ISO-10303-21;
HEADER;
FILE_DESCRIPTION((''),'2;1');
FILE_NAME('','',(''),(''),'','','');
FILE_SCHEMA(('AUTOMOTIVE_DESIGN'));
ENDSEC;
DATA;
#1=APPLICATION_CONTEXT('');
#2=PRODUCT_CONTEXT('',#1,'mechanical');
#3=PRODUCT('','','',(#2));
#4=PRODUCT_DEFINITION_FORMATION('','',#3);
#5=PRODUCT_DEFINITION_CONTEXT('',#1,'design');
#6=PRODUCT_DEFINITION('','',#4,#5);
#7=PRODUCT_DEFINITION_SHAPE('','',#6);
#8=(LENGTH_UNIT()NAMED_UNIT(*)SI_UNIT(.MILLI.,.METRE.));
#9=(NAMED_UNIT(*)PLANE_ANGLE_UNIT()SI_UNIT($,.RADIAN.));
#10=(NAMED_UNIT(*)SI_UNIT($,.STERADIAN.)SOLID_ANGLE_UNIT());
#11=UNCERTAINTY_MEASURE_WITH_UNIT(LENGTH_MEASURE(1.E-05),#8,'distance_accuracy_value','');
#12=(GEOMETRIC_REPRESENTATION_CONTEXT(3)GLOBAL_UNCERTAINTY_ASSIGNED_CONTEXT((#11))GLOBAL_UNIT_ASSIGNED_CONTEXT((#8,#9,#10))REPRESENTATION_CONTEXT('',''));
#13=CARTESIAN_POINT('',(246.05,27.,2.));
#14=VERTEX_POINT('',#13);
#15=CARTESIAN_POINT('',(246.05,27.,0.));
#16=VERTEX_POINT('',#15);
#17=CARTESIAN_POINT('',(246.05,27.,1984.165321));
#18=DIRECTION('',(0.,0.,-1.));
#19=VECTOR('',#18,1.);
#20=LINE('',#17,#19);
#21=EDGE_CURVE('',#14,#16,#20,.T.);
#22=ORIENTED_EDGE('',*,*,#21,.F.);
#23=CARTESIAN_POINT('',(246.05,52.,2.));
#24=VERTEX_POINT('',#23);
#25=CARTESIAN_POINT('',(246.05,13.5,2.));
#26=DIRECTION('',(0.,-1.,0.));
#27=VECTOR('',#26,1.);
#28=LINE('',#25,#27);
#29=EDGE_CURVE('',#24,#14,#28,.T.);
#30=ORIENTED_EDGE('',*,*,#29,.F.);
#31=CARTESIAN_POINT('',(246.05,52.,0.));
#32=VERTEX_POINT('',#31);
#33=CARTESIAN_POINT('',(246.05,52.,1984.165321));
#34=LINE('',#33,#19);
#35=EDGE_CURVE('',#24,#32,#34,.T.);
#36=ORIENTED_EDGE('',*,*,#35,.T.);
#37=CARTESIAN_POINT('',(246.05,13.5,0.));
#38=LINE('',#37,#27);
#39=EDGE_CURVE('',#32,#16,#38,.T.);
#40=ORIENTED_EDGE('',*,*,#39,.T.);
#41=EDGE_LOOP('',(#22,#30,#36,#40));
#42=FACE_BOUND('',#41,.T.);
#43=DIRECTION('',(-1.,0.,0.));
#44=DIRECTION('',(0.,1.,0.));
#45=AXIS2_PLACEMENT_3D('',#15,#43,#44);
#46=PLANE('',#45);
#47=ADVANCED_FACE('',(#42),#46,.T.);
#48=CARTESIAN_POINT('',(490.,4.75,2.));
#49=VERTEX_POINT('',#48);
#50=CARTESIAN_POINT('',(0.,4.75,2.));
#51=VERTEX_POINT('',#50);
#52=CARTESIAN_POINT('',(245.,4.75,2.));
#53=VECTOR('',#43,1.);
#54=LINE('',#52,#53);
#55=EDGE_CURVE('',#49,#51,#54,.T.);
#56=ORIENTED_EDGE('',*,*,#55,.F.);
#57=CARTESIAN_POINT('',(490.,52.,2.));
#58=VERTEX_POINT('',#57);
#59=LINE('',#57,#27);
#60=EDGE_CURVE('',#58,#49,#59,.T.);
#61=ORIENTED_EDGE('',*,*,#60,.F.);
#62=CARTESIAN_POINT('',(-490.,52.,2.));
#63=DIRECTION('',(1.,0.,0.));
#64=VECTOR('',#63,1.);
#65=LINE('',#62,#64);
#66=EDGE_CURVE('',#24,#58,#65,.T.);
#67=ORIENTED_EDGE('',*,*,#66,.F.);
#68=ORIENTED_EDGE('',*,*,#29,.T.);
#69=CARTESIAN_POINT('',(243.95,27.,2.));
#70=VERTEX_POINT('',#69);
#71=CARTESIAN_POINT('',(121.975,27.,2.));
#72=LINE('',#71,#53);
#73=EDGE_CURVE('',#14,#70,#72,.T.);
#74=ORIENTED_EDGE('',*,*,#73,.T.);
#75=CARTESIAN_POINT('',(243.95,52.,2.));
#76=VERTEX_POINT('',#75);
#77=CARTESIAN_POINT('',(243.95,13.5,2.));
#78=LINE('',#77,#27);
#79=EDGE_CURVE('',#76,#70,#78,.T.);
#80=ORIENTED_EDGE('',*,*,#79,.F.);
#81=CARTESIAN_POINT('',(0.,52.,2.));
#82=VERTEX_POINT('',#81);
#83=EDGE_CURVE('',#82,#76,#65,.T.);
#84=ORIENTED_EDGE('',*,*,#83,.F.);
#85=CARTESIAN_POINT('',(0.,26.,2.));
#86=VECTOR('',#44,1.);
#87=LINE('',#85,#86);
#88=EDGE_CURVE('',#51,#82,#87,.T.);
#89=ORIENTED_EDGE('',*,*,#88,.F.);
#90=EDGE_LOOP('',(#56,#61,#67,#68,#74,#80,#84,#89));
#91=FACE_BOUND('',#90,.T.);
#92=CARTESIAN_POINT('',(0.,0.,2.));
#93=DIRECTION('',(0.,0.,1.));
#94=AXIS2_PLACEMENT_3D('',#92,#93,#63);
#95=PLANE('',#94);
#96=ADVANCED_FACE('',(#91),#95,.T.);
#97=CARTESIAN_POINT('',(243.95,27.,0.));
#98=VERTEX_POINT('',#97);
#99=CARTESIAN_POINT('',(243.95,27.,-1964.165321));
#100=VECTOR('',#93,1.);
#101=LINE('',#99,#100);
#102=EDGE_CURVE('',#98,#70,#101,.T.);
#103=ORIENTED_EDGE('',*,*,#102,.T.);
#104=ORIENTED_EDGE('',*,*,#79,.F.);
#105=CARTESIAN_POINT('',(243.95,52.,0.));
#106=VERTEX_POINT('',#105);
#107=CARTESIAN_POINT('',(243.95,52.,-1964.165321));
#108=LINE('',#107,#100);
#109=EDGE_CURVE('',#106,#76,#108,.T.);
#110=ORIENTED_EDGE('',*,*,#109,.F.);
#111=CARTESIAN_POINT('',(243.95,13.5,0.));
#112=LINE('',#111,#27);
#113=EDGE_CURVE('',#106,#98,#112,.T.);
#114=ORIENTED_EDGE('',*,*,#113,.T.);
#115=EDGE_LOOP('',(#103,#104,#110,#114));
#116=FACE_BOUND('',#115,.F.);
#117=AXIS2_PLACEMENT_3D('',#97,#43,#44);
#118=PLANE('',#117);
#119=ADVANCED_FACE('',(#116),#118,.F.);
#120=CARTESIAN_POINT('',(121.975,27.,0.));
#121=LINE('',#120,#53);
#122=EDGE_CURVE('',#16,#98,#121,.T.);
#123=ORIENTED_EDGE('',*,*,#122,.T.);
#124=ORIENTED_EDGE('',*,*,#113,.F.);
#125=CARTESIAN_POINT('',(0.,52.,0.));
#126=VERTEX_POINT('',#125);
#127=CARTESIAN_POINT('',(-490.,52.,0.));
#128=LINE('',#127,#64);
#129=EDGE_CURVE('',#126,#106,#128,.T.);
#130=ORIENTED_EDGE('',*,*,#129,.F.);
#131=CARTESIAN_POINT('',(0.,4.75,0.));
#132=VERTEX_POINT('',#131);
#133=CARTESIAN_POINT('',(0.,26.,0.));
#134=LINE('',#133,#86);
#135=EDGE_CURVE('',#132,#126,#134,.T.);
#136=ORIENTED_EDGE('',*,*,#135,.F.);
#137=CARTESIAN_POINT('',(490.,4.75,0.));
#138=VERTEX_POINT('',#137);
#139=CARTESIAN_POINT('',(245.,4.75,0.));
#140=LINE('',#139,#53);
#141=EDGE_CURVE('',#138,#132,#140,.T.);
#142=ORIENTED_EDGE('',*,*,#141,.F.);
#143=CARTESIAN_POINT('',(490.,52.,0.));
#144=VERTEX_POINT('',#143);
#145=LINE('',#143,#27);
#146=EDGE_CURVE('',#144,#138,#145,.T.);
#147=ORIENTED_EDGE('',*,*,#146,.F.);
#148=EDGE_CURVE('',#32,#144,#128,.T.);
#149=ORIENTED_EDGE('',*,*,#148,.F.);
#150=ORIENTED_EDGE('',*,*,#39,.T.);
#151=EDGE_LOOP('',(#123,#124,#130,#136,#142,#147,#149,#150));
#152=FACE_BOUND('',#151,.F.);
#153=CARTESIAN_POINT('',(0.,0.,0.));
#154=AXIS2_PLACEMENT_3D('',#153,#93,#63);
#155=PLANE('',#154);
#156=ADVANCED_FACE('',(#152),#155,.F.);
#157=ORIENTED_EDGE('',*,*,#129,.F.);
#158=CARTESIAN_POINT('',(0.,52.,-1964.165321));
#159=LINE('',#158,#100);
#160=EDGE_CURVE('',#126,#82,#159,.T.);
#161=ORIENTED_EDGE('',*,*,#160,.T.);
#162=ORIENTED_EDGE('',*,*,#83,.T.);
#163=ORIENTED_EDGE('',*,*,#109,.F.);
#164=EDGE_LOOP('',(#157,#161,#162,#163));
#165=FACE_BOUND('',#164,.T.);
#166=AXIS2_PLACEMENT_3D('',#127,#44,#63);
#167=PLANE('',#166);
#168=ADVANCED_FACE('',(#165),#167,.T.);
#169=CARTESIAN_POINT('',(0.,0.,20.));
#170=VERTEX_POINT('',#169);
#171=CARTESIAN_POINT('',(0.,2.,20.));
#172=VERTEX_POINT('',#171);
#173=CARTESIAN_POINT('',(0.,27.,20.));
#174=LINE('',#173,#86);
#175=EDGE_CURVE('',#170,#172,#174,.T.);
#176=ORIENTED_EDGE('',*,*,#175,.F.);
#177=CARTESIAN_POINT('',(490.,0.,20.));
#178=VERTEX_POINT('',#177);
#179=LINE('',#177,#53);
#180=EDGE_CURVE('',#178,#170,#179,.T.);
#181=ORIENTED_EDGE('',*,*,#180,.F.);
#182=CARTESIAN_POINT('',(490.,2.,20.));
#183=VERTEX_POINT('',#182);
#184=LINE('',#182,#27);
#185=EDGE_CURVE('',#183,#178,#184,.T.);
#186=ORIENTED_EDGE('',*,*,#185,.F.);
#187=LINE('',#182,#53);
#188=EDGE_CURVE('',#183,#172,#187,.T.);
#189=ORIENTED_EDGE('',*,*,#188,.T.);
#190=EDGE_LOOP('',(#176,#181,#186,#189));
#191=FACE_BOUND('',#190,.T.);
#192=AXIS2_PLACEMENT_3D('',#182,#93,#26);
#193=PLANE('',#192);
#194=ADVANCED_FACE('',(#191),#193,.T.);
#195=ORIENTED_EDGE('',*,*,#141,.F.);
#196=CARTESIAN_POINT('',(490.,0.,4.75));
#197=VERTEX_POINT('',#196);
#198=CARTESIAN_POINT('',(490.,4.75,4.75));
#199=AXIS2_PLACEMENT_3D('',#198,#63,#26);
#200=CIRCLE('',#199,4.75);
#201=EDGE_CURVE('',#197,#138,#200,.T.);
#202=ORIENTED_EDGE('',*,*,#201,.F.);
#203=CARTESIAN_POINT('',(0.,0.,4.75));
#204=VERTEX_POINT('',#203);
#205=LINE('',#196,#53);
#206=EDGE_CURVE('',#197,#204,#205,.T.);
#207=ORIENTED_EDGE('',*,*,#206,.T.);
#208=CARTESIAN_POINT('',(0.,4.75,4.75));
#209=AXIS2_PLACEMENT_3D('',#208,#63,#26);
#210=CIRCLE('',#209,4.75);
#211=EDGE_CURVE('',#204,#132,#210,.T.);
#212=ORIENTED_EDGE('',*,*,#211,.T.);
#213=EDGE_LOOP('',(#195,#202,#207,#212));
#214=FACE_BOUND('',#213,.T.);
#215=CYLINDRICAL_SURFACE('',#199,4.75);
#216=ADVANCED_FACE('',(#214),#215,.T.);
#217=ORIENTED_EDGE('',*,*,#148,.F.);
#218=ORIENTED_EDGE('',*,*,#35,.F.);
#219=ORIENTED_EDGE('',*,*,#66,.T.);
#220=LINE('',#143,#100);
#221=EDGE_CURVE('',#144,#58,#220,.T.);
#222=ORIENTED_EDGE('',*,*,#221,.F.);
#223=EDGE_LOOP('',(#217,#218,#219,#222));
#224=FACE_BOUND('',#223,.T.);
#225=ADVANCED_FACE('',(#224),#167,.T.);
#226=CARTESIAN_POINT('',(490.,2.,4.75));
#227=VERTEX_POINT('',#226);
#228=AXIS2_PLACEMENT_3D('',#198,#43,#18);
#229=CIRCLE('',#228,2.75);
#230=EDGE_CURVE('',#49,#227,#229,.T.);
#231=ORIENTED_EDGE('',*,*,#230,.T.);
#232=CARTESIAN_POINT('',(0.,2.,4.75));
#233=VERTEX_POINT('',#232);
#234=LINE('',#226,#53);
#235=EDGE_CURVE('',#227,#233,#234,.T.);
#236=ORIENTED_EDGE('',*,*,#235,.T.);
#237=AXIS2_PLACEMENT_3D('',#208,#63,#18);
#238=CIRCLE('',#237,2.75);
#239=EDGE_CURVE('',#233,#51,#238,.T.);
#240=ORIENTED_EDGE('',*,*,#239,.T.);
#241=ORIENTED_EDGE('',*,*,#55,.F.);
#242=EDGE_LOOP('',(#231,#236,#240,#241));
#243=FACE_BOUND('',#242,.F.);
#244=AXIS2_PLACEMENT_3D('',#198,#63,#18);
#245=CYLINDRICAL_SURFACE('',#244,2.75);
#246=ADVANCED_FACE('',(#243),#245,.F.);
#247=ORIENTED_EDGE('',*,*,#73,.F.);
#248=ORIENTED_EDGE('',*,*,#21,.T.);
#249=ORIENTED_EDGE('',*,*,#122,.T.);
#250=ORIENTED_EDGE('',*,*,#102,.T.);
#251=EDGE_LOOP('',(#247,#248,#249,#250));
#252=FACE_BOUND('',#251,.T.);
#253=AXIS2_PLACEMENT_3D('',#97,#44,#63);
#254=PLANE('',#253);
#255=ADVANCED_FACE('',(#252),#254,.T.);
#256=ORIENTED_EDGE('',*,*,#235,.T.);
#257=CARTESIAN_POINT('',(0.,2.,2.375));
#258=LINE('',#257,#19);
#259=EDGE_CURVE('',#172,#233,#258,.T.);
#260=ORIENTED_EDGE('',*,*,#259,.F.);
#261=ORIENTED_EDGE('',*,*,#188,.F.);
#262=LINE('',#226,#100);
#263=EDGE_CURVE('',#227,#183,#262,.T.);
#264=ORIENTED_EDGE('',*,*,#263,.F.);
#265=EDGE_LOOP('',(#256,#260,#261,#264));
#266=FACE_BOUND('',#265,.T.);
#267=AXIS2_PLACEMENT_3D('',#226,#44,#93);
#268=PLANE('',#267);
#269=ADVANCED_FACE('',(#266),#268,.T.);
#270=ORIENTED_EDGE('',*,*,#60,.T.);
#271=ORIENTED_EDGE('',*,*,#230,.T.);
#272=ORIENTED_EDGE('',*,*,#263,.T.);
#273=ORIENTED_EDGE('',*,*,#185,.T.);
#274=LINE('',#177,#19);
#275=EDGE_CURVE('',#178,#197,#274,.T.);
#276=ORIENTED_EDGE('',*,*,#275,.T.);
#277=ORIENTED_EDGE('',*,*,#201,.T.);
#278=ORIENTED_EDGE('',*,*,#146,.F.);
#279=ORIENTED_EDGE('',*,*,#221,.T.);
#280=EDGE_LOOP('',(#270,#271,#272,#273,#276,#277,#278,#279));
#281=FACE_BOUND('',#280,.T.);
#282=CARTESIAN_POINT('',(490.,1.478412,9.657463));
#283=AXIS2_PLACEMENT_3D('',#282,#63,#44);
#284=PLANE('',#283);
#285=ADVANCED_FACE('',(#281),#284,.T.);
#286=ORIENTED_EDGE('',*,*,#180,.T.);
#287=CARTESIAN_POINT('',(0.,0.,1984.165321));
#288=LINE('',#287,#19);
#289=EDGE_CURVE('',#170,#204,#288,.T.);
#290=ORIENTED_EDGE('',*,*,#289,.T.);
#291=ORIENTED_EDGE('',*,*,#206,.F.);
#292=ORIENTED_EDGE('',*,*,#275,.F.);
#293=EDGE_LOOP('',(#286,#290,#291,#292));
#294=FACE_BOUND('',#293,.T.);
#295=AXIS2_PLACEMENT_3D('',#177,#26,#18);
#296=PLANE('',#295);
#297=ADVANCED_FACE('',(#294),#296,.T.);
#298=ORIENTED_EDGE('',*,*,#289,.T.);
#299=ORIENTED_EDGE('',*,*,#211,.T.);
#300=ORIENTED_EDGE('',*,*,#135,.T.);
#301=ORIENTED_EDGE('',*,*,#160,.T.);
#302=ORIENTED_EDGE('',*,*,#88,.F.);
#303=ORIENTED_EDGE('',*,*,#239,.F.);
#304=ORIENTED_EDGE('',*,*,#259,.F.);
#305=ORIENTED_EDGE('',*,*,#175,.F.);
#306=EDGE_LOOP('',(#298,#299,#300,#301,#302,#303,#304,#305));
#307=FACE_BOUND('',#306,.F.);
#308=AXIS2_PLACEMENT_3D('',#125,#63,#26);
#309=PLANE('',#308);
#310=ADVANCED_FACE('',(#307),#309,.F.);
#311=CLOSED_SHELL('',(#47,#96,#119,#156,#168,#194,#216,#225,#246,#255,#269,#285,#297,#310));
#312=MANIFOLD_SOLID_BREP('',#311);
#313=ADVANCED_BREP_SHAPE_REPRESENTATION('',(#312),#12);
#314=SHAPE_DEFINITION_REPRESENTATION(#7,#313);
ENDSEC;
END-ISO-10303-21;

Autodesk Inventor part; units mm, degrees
ref_plane "YZ Plane" through (0, 0, 0) normal (1, 0, 0) x (0, 1, 0)
ref_plane "XZ Plane" through (0, 0, 0) normal (0, 1, 0) x (-1, 0, 0)
ref_plane "XY Plane" through (0, 0, 0) normal (0, 0, 1) x (1, 0, 0)
sketch "Sketch1" plane through (0, 0, 0) normal (0, 0, 1) x (1, 0, 0)
  line L0 (-490, 52) -> (490, 52)
  line L1 (490, 52) -> (490, 0)
  line L2 (490, 0) -> (-490, 0)
  line L3 (-490, 0) -> (-490, 52)
  point P0 (0, 0)
  point P1 (0, 0)
  dimension "d0" = 980
  dimension "d1" = 52
extrude "Plate1" add sketch "Sketch1" along normal blind 2
sketch "Sketch2" plane through (490, 2, 0) normal (0, -1, 0) x (1, 0, 0)
  line L0 (-980, 0) -> (0, 0)
  line L1 (0, 0) -> (0, 20)
  line L2 (0, 20) -> (-980, 20)
  line L3 (-980, 20) -> (-980, 0)
edge flange "Flange1" height 20 angle 90 thickness 2 bend radius 2.75 thickness toward (0, -1, 0) relief round relief width 2 relief depth 1 edges at (0, 0, 2) wall of the first edge with corners at (-490, 2, 0) (490, 2, 0) (490, 2, 20) (-490, 2, 20)
bend "Bend1"
corner "Corner1"
sketch "Sketch11" plane through (0, 0, 0) normal (0, 0, 1) x (1, 0, 0)
  line L0 (-490, 52) -> (490, 52) projected
  circle A0 centre (0, 52) radius 30
  line L1 (-490, 0) -> (490, 0) projected
  line L2 (246.05, 0) -> (243.95, 0)
  line L3 (243.95, 0) -> (243.95, 27)
  line L4 (243.95, 27) -> (246.05, 27)
  line L5 (246.05, 27) -> (246.05, 0)
  line L6 (-243.95, 0) -> (-246.05, 0)
  line L7 (-246.05, 0) -> (-246.05, 27) construction
  line L8 (-246.05, 27) -> (-243.95, 27) construction
  line L9 (-243.95, 27) -> (-243.95, 0) construction
  line L10 (0, 52) -> (0, 0)
  line L11 (246.05, 27) -> (246.05, 52)
  line L12 (243.95, 27) -> (243.95, 52)
  line L13 (-243.95, 27) -> (-243.95, 52) construction
  line L14 (-246.05, 27) -> (-246.05, 52) construction
  line L15 (-490, 0) -> (-490, 52)
  circle A1 centre (490, 52) radius 30
  line L16 (490, 52) -> (490, 0)
  point P0 (30, 52)
  point P1 (-30, 52)
  point P2 (-245, 27)
  point P3 (245, 27)
  point P4 (490, 22)
  point P5 (460, 52)
  point P6 (0, 22)
  dimension "d44" = 60
  dimension "d47" = 2.1
  dimension "d49" = 490
  dimension "d50" = 27
extrude "Extrusion4" cut sketch "Sketch11" along normal through all both and the other way through all contours L10 A0 L0 | A0 L10 L1 L15 L0 | L0 L11 L4 L12 picked at (-19.7493, 49.7748)
sketch "Sketch9" plane through (0, 0, 2) normal (0, 0, 1) x (1, 0, 0)
  line L0 (456.3279, 23.6801) -> (456.3279, 11.6801) construction
  line L1 (456.3279, 11.6801) -> (256.3279, 11.6801) construction
  line L2 (256.3279, 11.6801) -> (256.3279, 23.6801) construction
  line L3 (256.3279, 23.6801) -> (456.3279, 23.6801) construction
  line L4 (-490, 52) -> (490, 52) projected
  point P0 (0, 0)
  point P1 (1, 52)
  dimension "d38" = 200
  dimension "d39" = 12
mark "Mark3"
equation "\"d1\" = СПИНА_Стрингер_1_высота"
equation "\"d2\" = Thickness"
equation "\"d3\" = BendReliefWidth"
equation "\"d4\" = BendReliefDepth"
equation "\"d5\" = MinimumRemnant"
equation "\"d6\" = TransitionRadius"
equation "\"d9\" = BendRadius"
equation "\"d10\" = CornerReliefSize"
equation "\"d11\" = GapSize"
equation "\"d12\" = JacobiRadiusSize"
equation "\"BendReliefWidth\" = Thickness"
equation "\"BendReliefDepth\" = 0.5 * Thickness"
equation "\"CornerReliefSize\" = 4 * Thickness"
equation "\"MinimumRemnant\" = 2 * Thickness"
equation "\"TransitionRadius\" = BendRadius"
equation "\"JacobiRadiusSize\" = BendRadius"
equation "\"GapSize\" = Thickness"
equation "\"СПИНА_Стрингер_1_высота\" = 52"
equation "\"Thickness\" = 2"
equation "\"BendRadius\" = 2.75"
properties part number "MSC 204 STRINGER BACK ^" material "Stainless Steel"
